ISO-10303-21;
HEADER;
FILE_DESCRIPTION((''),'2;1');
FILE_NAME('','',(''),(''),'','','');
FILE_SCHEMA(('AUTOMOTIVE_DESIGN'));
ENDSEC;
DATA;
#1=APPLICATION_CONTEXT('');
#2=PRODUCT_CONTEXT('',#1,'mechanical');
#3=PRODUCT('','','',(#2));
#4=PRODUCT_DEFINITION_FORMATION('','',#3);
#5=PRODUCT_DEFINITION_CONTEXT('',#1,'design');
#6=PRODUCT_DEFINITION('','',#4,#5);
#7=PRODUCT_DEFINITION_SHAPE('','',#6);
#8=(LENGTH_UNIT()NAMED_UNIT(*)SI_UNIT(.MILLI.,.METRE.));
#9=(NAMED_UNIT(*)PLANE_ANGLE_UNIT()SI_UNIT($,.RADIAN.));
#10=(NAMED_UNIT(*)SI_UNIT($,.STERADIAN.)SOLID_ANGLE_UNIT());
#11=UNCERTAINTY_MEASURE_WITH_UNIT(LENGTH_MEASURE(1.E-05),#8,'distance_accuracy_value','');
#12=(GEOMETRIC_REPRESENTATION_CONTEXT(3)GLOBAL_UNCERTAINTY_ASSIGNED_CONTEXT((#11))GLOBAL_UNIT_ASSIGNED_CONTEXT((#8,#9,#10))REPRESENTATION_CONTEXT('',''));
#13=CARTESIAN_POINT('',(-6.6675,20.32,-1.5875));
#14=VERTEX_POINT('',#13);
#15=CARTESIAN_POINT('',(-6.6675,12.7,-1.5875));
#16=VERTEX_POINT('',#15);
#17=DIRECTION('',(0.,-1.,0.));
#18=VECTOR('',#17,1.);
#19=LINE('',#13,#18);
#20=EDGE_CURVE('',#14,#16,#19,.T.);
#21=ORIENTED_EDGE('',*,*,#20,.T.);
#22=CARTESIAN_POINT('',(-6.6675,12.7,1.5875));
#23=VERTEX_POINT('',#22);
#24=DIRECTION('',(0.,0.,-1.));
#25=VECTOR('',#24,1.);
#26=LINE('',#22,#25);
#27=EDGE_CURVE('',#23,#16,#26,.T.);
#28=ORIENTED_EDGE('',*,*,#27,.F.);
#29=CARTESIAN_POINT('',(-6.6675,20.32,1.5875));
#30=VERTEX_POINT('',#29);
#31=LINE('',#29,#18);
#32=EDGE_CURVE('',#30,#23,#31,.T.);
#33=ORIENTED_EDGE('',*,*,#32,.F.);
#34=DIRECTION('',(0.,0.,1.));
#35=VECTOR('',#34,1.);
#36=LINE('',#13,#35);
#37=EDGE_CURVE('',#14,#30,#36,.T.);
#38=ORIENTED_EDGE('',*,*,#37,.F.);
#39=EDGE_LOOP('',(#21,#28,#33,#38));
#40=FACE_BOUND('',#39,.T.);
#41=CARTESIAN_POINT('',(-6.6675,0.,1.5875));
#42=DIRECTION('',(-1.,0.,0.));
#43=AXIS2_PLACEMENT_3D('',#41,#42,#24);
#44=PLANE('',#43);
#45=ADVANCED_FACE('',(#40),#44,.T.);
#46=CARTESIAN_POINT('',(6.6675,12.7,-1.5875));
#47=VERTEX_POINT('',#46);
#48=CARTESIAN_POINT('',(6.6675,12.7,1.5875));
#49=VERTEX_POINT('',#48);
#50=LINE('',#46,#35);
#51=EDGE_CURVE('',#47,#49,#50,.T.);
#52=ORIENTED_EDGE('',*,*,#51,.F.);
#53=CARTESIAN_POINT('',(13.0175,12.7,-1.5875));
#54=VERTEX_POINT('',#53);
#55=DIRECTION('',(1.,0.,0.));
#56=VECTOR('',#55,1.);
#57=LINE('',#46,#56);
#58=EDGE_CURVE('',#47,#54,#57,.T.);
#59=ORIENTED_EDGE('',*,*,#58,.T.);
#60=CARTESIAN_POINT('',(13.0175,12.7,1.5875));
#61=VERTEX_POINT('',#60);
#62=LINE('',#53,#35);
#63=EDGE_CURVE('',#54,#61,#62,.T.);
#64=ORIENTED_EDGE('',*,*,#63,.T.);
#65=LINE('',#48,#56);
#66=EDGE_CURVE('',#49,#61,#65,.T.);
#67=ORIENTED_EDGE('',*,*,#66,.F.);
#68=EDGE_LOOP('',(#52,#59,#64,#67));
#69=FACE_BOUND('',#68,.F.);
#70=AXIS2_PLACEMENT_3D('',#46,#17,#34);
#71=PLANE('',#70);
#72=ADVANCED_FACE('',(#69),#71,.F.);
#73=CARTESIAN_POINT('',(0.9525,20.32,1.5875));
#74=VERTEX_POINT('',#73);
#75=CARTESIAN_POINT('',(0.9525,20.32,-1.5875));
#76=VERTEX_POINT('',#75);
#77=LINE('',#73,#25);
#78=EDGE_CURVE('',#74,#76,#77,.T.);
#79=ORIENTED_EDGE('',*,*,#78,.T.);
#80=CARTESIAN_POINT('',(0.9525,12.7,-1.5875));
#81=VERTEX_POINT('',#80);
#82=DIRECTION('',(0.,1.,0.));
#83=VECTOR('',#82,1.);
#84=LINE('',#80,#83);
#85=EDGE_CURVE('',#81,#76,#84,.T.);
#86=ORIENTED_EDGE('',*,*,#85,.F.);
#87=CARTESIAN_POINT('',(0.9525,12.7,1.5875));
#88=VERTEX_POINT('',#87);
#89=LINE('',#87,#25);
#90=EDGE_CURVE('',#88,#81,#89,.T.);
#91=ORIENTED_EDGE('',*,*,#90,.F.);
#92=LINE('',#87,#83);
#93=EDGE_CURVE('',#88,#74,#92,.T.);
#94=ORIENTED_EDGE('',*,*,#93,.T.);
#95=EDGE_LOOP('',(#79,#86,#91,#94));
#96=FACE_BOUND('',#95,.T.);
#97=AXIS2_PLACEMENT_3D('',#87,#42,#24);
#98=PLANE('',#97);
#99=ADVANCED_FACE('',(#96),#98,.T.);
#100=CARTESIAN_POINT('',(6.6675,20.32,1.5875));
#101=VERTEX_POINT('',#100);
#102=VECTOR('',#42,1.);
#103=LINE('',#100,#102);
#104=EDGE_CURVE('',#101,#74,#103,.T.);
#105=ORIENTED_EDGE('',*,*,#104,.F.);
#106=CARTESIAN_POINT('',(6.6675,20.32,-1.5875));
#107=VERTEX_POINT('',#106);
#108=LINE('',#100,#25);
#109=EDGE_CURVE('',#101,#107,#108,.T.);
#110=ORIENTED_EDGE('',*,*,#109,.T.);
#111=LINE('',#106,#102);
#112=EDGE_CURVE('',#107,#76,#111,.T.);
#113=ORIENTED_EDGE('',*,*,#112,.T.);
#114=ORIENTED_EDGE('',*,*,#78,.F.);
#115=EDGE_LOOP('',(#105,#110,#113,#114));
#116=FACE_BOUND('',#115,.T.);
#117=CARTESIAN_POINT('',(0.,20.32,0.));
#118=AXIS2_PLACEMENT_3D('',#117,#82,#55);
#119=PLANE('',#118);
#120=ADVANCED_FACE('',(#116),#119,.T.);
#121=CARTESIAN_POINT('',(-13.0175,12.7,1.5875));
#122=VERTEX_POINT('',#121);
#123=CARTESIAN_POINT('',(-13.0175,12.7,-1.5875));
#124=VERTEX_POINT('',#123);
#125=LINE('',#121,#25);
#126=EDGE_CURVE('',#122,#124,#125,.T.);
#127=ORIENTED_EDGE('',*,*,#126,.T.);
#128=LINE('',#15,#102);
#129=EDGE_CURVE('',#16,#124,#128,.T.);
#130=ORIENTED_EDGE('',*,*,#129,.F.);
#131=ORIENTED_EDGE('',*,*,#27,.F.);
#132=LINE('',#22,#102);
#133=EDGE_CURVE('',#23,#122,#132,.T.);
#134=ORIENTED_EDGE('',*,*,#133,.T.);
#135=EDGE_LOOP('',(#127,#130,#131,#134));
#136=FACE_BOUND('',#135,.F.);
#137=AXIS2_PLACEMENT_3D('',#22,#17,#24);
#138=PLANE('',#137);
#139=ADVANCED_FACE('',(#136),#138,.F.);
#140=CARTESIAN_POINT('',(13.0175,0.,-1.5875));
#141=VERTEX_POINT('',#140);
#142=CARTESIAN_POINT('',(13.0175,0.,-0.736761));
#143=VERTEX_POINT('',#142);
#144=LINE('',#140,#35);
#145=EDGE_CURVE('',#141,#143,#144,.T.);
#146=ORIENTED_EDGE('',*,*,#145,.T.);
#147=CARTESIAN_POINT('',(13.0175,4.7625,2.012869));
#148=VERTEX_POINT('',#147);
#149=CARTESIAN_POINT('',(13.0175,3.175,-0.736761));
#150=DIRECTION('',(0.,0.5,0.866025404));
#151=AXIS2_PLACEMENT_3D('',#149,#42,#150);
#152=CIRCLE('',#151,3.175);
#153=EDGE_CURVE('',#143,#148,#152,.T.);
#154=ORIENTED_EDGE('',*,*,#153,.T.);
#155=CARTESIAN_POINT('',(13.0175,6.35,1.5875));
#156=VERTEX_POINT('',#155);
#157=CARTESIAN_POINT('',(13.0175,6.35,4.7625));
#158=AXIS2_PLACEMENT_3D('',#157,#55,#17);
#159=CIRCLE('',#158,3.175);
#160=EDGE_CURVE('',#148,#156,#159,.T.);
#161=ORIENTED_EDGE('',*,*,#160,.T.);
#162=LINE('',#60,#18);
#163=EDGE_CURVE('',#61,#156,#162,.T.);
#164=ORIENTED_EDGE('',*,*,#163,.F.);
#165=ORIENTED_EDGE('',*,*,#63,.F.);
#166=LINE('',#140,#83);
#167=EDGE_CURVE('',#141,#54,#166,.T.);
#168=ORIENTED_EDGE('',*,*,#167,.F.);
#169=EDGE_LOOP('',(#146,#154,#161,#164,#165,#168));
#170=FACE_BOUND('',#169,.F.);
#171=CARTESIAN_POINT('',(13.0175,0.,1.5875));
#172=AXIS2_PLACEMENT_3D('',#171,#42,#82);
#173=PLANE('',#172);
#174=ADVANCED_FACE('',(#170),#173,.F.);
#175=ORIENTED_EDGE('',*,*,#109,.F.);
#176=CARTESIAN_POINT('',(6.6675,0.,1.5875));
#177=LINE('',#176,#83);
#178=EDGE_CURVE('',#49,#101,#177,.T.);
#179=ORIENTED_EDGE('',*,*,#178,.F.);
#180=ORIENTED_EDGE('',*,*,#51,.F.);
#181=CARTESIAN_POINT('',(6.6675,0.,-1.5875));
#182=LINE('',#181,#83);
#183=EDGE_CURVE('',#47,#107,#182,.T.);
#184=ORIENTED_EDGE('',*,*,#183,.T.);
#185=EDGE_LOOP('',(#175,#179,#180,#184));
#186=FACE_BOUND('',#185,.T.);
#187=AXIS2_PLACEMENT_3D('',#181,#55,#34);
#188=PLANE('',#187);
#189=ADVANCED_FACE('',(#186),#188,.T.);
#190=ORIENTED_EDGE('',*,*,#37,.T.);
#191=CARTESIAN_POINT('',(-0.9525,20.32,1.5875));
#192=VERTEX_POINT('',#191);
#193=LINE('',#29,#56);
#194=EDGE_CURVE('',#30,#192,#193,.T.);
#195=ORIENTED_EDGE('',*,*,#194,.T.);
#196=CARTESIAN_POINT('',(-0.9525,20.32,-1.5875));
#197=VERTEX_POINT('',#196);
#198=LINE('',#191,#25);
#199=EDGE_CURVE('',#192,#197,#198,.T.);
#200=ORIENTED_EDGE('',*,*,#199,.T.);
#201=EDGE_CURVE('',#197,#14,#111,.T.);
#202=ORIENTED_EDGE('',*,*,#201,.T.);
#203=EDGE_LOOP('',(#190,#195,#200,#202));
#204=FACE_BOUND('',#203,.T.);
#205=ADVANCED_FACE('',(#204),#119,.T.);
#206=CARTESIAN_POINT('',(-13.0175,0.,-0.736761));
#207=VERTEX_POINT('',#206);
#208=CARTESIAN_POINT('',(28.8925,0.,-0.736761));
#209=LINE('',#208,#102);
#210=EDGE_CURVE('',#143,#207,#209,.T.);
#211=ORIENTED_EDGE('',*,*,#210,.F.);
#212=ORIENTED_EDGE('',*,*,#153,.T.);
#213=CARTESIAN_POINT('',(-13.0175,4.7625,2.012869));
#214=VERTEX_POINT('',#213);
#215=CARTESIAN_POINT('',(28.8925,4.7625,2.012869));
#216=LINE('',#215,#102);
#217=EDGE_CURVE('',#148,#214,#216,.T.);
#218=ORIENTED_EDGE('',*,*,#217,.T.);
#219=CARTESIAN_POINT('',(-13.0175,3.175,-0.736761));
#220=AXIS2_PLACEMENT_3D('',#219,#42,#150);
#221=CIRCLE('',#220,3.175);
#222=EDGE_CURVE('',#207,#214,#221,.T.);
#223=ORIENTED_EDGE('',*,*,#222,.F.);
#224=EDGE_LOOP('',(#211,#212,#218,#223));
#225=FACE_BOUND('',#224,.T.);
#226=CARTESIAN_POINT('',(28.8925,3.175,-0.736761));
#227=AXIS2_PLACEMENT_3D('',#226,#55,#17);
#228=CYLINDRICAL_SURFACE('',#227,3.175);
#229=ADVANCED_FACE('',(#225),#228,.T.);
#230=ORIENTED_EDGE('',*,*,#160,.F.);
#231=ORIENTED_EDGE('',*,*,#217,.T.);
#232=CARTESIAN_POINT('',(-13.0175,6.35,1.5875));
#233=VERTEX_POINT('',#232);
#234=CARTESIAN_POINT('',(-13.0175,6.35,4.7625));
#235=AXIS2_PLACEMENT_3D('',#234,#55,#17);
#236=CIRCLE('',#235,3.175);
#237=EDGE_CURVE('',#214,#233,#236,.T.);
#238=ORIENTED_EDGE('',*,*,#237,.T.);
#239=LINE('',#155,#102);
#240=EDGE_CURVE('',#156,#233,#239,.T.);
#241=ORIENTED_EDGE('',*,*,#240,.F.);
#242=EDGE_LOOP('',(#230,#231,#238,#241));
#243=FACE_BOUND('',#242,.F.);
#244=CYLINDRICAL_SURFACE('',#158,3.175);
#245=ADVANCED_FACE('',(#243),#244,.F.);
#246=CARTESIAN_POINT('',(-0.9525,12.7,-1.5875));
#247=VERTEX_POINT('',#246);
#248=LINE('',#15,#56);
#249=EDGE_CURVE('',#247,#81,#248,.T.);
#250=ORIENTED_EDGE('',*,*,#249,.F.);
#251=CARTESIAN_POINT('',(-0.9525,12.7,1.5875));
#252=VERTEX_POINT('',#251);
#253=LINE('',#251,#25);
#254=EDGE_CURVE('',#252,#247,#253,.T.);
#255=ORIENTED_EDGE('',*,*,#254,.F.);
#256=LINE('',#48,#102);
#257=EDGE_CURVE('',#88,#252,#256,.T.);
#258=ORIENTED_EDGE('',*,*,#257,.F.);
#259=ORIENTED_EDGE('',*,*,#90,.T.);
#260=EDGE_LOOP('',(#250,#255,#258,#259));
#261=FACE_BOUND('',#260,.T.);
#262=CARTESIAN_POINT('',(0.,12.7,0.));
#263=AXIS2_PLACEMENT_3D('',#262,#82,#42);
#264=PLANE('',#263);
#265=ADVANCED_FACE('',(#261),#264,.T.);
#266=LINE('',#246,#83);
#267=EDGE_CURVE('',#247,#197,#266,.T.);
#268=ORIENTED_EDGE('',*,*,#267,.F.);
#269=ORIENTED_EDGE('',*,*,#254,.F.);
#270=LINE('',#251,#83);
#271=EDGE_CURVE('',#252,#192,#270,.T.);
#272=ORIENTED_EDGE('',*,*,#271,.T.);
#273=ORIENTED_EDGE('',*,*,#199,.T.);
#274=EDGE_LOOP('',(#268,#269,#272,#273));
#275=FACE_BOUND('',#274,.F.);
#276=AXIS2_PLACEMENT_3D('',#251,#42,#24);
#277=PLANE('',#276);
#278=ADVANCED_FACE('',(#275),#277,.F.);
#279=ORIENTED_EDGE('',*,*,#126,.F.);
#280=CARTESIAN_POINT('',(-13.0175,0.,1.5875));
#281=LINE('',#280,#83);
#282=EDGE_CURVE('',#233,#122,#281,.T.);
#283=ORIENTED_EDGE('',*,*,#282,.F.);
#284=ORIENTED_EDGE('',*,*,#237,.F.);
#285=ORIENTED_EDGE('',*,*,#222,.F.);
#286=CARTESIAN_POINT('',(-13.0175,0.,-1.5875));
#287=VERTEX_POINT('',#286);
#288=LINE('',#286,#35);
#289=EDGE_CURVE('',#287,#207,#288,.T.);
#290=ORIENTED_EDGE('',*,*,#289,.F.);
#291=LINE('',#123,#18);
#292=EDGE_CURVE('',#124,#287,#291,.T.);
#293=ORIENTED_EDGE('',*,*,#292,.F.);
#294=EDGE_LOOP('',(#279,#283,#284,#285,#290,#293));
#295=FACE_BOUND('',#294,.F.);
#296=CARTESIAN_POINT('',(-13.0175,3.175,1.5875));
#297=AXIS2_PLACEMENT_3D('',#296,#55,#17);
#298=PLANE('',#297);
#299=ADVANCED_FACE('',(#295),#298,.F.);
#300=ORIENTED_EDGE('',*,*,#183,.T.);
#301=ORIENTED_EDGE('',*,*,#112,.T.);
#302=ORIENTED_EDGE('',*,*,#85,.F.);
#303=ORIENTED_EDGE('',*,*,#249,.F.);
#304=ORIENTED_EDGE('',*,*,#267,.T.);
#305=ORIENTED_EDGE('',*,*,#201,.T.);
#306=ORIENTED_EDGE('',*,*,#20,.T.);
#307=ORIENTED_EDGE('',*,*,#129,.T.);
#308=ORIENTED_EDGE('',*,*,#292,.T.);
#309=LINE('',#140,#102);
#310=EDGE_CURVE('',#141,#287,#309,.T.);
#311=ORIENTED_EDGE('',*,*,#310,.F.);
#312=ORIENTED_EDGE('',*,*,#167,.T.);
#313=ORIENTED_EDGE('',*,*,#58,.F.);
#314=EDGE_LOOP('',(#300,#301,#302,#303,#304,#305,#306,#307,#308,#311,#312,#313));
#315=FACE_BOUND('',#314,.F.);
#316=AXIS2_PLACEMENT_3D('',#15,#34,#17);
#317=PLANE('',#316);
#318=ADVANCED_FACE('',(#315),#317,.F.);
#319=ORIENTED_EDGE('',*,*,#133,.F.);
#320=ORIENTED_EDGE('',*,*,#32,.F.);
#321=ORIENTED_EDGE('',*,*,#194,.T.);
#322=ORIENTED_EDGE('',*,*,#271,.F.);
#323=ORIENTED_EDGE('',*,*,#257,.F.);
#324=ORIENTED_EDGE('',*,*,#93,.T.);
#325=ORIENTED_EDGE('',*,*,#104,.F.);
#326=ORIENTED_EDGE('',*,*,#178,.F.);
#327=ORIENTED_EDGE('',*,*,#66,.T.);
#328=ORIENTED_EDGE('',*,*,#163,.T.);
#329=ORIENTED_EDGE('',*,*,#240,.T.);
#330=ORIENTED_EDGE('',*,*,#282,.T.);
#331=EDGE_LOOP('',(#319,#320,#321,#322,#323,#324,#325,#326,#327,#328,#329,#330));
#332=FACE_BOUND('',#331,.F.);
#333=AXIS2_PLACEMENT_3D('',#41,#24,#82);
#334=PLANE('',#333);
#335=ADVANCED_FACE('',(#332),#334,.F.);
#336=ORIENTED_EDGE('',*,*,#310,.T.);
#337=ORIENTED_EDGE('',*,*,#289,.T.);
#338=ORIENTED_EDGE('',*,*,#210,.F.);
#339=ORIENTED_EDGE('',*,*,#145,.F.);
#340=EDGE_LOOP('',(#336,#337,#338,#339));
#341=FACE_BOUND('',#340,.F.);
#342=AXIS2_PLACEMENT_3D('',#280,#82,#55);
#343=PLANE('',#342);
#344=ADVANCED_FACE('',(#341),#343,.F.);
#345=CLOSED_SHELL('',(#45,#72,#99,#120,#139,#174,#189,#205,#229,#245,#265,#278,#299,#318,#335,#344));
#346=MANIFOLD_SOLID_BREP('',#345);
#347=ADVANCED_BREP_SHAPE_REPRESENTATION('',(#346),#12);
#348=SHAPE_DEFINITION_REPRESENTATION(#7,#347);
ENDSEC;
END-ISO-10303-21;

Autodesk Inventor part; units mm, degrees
ref_plane "YZ Plane" through (0, 0, 0) normal (1, 0, 0) x (0, 1, 0)
ref_plane "XZ Plane" through (0, 0, 0) normal (0, 1, 0) x (-1, 0, 0)
ref_plane "XY Plane" through (0, 0, 0) normal (0, 0, 1) x (1, 0, 0)
sketch "Sketch1" plane through (0, 0, 0) normal (0, 1, 0) x (-1, 0, 0)
  line L0 (-6.6675, 1.5875) -> (6.6675, 1.5875)
  line L1 (6.6675, 1.5875) -> (6.6675, -1.5875)
  line L2 (6.6675, -1.5875) -> (-6.6675, -1.5875)
  line L3 (-6.6675, -1.5875) -> (-6.6675, 1.5875)
  point P0 (0, 0)
  dimension "d0" = 13.335
  dimension "d1" = 3.175
  dimension "d2" = 1.5875
  dimension "d3" = 6.6675
extrude "Extrusion1" add sketch "Sketch1" along normal blind 12.7
sketch "Sketch2" plane through (0, 12.7, 0) normal (0, 1, 0) x (1, 0, 0)
  line L0 (6.6675, -1.5875) -> (6.6675, 1.5875) projected
  line L1 (6.6675, 1.5875) -> (-6.6675, 1.5875) projected
  line L2 (-6.6675, 1.5875) -> (-6.6675, -1.5875) projected
  line L3 (-6.6675, -1.5875) -> (-0.9525, -1.5875)
  line L4 (-0.9525, -1.5875) -> (-0.9525, 1.5875)
  line L5 (-0.9525, 1.5875) -> (-6.6675, 1.5875)
  line L6 (-6.6675, 1.5875) -> (-6.6675, -1.5875)
  line L7 (6.6675, -1.5875) -> (0.9525, -1.5875)
  line L8 (0.9525, -1.5875) -> (0.9525, 1.5875)
  line L9 (0.9525, 1.5875) -> (6.6675, 1.5875)
  line L10 (6.6675, 1.5875) -> (6.6675, -1.5875)
  point P0 (0, 0)
  dimension "d6" = 5.715
  dimension "d7" = 5.715
extrude "Extrusion2" add sketch "Sketch2" along normal blind 7.62
sketch "Sketch3" plane through (6.6675, 0, 1.5875) normal (1, 0, 0) x (0, 0, -1)
  line L0 (3.175, 0) -> (0, 0) projected
  line L1 (3.175, 0) -> (3.175, 20.32) projected
  line L2 (0, 0) -> (3.175, 0)
  line L3 (3.175, 0) -> (3.175, 12.7)
  line L4 (3.175, 12.7) -> (0, 12.7)
  line L5 (0, 12.7) -> (0, 0)
  point P0 (1.5875, 0)
  dimension "d10" = 0
  dimension "d11" = 12.7
extrude "Extrusion3" add sketch "Sketch3" along normal blind 6.35
sketch "Sketch4" plane through (-6.6675, 0, -1.5875) normal (-1, 0, 0) x (0, 0, 1)
  line L0 (0, 0) -> (3.175, 0)
  line L1 (3.175, 0) -> (3.175, 12.7)
  line L2 (3.175, 12.7) -> (0, 12.7)
  line L3 (0, 12.7) -> (0, 0)
  point P0 (1.5875, 0)
  dimension "d14" = 3.175
  dimension "d15" = 12.7
extrude "Extrusion4" add sketch "Sketch4" along normal blind 6.35
sketch "Sketch5" plane through (0.9525, 20.32, 1.5875) normal (0, 0, 1) x (1, 0, 0)
  line L0 (-13.97, -20.32) -> (12.065, -20.32)
  line L1 (12.065, -20.32) -> (12.065, -17.145)
  line L2 (12.065, -17.145) -> (-13.97, -17.145)
  line L3 (-13.97, -17.145) -> (-13.97, -20.32)
  point P0 (-0.9525, -20.32)
  dimension "d18" = 26.035
  dimension "d19" = 3.175
extrude "Extrusion5" add sketch "Sketch5" along normal blind 3.175
fillet "Fillet1" radius 3.175 3 edges at (0, 3.175, 4.7625) (0, 3.175, 1.5875) (0, 0, 4.7625)
equation "\"d2\" = 0.5 * d1"
equation "\"d3\" = 0.5 * d0"
equation "\"d7\" = d6"
properties part number "batteryFalg"
